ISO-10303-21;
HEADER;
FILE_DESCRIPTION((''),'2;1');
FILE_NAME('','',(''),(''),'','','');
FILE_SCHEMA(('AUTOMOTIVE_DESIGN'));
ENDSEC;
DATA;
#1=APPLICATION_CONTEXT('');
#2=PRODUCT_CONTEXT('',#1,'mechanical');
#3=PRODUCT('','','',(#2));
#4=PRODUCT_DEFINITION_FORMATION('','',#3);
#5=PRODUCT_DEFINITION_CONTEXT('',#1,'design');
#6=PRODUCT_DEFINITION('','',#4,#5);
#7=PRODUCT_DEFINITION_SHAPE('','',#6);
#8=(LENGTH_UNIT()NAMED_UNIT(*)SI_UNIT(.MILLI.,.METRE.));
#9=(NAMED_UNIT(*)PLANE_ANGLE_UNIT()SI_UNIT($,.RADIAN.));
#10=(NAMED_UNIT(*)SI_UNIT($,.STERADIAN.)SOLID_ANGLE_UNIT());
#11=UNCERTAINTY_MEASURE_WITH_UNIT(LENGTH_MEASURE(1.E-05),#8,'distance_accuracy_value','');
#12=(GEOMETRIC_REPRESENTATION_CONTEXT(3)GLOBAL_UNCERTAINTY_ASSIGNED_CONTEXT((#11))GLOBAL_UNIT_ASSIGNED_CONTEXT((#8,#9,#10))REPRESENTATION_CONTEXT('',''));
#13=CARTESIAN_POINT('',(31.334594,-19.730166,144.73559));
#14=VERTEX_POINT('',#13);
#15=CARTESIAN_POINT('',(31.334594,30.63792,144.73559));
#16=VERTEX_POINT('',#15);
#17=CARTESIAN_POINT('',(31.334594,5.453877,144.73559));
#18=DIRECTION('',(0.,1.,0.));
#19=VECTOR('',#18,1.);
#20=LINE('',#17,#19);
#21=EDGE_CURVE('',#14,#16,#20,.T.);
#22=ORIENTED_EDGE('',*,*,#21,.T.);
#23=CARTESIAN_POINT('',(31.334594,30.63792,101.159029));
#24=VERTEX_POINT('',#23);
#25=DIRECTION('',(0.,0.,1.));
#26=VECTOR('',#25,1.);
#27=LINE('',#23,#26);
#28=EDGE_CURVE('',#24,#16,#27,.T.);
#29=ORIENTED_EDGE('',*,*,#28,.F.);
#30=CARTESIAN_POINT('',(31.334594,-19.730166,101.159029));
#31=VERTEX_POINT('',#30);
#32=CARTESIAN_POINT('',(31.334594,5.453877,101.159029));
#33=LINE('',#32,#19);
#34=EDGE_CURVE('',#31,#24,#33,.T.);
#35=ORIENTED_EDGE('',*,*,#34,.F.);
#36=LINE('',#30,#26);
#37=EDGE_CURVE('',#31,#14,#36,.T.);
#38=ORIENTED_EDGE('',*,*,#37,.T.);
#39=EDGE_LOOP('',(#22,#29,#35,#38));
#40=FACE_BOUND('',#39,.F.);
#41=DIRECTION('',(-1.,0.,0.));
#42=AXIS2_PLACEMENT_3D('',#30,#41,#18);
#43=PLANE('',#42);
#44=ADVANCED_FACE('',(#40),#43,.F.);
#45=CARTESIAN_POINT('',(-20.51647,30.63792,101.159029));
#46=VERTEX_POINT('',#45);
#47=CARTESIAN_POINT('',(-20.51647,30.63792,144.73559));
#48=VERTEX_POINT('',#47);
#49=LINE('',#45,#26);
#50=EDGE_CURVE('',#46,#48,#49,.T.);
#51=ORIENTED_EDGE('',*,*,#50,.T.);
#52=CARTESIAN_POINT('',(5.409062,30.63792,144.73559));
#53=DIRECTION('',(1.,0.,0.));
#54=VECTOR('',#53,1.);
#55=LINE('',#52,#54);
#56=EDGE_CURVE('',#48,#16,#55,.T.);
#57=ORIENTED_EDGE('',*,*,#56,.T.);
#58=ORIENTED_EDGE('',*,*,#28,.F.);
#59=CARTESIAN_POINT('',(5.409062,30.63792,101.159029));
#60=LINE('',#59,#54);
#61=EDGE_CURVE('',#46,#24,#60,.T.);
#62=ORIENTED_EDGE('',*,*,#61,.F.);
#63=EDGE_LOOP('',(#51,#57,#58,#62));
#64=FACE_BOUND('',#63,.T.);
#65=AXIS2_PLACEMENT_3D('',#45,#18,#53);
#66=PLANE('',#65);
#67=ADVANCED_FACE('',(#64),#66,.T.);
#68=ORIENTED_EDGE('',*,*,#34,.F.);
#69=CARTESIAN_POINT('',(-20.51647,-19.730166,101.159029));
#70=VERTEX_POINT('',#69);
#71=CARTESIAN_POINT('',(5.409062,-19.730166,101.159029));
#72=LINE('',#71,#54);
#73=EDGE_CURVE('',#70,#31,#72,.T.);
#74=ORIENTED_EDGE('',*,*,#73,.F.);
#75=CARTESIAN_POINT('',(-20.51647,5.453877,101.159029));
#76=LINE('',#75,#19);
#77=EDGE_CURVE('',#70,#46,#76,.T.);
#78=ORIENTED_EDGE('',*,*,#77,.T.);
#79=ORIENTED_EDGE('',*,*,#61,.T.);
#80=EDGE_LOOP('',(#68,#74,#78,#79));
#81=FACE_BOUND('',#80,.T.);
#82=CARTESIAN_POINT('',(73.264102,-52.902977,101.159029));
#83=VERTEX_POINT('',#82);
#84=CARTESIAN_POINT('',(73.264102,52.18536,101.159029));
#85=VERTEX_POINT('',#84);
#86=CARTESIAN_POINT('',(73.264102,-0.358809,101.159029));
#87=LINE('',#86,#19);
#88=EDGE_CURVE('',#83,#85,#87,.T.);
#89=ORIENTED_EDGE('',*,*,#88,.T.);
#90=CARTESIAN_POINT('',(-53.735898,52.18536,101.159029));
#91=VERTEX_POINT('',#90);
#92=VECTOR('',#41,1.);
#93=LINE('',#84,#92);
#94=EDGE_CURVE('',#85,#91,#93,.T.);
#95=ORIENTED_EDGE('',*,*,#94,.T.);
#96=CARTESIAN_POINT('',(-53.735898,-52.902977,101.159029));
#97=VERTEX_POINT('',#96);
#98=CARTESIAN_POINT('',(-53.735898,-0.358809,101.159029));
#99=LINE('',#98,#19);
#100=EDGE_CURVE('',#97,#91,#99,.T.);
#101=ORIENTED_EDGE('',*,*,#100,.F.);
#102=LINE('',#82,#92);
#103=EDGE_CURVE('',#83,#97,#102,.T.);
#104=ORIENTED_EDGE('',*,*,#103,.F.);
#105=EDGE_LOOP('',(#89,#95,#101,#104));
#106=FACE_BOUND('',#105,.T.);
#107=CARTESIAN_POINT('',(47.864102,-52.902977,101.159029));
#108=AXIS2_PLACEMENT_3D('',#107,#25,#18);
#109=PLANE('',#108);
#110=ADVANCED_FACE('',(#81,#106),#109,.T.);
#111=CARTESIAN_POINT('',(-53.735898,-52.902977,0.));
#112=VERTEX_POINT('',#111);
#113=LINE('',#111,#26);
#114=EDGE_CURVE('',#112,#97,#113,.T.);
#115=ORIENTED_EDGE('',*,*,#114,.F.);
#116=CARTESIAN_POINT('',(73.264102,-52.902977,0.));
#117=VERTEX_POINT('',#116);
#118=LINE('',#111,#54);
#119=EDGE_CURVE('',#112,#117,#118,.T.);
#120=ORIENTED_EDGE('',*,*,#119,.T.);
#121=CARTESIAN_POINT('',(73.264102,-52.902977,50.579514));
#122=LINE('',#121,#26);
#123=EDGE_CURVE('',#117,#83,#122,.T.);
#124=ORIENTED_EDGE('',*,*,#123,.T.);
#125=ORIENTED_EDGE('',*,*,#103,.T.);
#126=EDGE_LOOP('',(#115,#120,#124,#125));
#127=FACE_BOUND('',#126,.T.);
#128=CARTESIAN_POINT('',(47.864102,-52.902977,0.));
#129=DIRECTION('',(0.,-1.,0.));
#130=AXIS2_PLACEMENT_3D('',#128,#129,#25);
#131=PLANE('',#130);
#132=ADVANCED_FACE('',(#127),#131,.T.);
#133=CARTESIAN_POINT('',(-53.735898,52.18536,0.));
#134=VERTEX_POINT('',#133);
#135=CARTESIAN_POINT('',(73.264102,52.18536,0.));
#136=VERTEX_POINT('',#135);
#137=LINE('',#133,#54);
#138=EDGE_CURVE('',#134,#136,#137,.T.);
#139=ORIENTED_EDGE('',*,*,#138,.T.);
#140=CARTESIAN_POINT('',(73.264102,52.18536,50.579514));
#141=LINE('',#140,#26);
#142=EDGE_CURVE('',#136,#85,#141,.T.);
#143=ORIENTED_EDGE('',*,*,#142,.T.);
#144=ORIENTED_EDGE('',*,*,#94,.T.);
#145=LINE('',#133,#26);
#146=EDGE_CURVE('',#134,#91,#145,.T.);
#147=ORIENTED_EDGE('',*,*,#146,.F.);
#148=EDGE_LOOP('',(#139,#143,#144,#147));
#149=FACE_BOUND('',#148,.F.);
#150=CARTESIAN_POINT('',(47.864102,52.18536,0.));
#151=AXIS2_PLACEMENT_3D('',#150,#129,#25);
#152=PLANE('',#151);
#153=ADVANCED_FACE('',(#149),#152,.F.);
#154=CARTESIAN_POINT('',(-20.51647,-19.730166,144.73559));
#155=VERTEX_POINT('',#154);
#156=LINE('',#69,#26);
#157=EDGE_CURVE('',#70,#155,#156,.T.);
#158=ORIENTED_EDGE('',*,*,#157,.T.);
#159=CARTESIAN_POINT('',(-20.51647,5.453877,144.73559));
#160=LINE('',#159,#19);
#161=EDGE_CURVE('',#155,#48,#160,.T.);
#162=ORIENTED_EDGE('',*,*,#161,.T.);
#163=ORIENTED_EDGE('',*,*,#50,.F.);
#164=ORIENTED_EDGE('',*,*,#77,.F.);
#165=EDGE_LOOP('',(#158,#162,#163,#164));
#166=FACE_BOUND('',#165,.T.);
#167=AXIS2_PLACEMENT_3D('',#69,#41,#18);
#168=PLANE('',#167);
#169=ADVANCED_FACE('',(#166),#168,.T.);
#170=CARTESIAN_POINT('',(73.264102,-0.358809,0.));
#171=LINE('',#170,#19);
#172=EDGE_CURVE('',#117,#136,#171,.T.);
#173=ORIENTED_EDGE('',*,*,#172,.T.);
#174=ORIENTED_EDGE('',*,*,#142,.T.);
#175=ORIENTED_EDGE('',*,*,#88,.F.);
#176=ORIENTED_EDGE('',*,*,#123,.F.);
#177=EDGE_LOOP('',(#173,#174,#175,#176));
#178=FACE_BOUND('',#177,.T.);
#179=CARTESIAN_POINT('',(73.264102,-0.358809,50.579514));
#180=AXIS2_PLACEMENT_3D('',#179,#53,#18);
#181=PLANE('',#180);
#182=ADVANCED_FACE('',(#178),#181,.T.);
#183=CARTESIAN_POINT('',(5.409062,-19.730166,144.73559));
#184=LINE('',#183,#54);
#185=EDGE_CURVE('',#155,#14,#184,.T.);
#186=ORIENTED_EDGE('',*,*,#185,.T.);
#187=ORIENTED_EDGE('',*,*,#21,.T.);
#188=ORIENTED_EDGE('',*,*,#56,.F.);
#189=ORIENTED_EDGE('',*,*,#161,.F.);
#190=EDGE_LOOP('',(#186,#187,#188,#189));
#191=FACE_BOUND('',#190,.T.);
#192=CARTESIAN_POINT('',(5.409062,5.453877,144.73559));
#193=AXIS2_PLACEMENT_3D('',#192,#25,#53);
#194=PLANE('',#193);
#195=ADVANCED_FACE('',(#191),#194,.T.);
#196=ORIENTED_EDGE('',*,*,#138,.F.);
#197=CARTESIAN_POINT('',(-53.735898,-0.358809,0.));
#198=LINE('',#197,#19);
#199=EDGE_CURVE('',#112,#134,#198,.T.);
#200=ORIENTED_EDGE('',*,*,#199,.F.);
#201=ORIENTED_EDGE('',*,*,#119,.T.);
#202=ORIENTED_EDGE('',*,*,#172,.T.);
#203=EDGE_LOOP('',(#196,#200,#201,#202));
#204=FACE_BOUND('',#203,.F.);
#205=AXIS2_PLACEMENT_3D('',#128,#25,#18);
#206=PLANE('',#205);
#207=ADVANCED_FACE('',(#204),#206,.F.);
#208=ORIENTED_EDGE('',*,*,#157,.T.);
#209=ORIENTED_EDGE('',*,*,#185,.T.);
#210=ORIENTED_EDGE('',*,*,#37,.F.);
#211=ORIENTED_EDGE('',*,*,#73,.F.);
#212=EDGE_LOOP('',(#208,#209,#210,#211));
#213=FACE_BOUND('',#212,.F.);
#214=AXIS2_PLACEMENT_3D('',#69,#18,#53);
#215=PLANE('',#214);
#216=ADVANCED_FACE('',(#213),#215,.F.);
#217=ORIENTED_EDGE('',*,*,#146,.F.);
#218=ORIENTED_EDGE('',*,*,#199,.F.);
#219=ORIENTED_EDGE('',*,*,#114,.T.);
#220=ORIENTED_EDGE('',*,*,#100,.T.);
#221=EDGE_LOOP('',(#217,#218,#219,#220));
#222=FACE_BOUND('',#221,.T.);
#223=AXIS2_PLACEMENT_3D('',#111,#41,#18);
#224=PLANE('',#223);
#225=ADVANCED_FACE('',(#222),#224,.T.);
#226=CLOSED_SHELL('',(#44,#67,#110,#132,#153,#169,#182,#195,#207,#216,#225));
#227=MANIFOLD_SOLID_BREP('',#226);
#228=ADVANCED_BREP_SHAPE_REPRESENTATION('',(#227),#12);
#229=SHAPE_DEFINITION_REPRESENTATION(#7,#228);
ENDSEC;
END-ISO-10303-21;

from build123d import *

# Parameters (mm, degrees)
F0_W     = 101.6
F0_H     = 105.0883368849
F1_DEPTH = 101.1590287089
F2_W     = 105.0883368849
F2_H     = 101.1590287089
F3_DEPTH = 25.4
F6_W     = 51.8510639668
F6_H     = 50.3680855036
F7_DEPTH = 43.5765609145


# Not quite as in the source:
# - the program builds the solid bodies; features that only make, move or delete a surface that nothing else refers to are left out


with BuildPart() as f1:
    # F0 (on Top) → F1 (new body)
    with BuildSketch(Plane.XY):
        with Locations((-2.9358975589, -0.3588087857)):
            Rectangle(F0_W, F0_H)
    extrude(amount=F1_DEPTH)

    # F2 (on face) → F3 (join)
    with BuildSketch(Plane.YZ.offset(47.8641024411)):
        with Locations((-0.3588087857, 50.5795143545)):
            Rectangle(F2_W, F2_H)
    extrude(amount=F3_DEPTH)

    # F6 (on face) → F7 (join)
    with BuildSketch(Plane.XY.offset(101.1590287089)):
        with Locations((5.4090619087, 5.453877151)):
            Rectangle(F6_W, F6_H)
    extrude(amount=F7_DEPTH)


solid = f1.part
